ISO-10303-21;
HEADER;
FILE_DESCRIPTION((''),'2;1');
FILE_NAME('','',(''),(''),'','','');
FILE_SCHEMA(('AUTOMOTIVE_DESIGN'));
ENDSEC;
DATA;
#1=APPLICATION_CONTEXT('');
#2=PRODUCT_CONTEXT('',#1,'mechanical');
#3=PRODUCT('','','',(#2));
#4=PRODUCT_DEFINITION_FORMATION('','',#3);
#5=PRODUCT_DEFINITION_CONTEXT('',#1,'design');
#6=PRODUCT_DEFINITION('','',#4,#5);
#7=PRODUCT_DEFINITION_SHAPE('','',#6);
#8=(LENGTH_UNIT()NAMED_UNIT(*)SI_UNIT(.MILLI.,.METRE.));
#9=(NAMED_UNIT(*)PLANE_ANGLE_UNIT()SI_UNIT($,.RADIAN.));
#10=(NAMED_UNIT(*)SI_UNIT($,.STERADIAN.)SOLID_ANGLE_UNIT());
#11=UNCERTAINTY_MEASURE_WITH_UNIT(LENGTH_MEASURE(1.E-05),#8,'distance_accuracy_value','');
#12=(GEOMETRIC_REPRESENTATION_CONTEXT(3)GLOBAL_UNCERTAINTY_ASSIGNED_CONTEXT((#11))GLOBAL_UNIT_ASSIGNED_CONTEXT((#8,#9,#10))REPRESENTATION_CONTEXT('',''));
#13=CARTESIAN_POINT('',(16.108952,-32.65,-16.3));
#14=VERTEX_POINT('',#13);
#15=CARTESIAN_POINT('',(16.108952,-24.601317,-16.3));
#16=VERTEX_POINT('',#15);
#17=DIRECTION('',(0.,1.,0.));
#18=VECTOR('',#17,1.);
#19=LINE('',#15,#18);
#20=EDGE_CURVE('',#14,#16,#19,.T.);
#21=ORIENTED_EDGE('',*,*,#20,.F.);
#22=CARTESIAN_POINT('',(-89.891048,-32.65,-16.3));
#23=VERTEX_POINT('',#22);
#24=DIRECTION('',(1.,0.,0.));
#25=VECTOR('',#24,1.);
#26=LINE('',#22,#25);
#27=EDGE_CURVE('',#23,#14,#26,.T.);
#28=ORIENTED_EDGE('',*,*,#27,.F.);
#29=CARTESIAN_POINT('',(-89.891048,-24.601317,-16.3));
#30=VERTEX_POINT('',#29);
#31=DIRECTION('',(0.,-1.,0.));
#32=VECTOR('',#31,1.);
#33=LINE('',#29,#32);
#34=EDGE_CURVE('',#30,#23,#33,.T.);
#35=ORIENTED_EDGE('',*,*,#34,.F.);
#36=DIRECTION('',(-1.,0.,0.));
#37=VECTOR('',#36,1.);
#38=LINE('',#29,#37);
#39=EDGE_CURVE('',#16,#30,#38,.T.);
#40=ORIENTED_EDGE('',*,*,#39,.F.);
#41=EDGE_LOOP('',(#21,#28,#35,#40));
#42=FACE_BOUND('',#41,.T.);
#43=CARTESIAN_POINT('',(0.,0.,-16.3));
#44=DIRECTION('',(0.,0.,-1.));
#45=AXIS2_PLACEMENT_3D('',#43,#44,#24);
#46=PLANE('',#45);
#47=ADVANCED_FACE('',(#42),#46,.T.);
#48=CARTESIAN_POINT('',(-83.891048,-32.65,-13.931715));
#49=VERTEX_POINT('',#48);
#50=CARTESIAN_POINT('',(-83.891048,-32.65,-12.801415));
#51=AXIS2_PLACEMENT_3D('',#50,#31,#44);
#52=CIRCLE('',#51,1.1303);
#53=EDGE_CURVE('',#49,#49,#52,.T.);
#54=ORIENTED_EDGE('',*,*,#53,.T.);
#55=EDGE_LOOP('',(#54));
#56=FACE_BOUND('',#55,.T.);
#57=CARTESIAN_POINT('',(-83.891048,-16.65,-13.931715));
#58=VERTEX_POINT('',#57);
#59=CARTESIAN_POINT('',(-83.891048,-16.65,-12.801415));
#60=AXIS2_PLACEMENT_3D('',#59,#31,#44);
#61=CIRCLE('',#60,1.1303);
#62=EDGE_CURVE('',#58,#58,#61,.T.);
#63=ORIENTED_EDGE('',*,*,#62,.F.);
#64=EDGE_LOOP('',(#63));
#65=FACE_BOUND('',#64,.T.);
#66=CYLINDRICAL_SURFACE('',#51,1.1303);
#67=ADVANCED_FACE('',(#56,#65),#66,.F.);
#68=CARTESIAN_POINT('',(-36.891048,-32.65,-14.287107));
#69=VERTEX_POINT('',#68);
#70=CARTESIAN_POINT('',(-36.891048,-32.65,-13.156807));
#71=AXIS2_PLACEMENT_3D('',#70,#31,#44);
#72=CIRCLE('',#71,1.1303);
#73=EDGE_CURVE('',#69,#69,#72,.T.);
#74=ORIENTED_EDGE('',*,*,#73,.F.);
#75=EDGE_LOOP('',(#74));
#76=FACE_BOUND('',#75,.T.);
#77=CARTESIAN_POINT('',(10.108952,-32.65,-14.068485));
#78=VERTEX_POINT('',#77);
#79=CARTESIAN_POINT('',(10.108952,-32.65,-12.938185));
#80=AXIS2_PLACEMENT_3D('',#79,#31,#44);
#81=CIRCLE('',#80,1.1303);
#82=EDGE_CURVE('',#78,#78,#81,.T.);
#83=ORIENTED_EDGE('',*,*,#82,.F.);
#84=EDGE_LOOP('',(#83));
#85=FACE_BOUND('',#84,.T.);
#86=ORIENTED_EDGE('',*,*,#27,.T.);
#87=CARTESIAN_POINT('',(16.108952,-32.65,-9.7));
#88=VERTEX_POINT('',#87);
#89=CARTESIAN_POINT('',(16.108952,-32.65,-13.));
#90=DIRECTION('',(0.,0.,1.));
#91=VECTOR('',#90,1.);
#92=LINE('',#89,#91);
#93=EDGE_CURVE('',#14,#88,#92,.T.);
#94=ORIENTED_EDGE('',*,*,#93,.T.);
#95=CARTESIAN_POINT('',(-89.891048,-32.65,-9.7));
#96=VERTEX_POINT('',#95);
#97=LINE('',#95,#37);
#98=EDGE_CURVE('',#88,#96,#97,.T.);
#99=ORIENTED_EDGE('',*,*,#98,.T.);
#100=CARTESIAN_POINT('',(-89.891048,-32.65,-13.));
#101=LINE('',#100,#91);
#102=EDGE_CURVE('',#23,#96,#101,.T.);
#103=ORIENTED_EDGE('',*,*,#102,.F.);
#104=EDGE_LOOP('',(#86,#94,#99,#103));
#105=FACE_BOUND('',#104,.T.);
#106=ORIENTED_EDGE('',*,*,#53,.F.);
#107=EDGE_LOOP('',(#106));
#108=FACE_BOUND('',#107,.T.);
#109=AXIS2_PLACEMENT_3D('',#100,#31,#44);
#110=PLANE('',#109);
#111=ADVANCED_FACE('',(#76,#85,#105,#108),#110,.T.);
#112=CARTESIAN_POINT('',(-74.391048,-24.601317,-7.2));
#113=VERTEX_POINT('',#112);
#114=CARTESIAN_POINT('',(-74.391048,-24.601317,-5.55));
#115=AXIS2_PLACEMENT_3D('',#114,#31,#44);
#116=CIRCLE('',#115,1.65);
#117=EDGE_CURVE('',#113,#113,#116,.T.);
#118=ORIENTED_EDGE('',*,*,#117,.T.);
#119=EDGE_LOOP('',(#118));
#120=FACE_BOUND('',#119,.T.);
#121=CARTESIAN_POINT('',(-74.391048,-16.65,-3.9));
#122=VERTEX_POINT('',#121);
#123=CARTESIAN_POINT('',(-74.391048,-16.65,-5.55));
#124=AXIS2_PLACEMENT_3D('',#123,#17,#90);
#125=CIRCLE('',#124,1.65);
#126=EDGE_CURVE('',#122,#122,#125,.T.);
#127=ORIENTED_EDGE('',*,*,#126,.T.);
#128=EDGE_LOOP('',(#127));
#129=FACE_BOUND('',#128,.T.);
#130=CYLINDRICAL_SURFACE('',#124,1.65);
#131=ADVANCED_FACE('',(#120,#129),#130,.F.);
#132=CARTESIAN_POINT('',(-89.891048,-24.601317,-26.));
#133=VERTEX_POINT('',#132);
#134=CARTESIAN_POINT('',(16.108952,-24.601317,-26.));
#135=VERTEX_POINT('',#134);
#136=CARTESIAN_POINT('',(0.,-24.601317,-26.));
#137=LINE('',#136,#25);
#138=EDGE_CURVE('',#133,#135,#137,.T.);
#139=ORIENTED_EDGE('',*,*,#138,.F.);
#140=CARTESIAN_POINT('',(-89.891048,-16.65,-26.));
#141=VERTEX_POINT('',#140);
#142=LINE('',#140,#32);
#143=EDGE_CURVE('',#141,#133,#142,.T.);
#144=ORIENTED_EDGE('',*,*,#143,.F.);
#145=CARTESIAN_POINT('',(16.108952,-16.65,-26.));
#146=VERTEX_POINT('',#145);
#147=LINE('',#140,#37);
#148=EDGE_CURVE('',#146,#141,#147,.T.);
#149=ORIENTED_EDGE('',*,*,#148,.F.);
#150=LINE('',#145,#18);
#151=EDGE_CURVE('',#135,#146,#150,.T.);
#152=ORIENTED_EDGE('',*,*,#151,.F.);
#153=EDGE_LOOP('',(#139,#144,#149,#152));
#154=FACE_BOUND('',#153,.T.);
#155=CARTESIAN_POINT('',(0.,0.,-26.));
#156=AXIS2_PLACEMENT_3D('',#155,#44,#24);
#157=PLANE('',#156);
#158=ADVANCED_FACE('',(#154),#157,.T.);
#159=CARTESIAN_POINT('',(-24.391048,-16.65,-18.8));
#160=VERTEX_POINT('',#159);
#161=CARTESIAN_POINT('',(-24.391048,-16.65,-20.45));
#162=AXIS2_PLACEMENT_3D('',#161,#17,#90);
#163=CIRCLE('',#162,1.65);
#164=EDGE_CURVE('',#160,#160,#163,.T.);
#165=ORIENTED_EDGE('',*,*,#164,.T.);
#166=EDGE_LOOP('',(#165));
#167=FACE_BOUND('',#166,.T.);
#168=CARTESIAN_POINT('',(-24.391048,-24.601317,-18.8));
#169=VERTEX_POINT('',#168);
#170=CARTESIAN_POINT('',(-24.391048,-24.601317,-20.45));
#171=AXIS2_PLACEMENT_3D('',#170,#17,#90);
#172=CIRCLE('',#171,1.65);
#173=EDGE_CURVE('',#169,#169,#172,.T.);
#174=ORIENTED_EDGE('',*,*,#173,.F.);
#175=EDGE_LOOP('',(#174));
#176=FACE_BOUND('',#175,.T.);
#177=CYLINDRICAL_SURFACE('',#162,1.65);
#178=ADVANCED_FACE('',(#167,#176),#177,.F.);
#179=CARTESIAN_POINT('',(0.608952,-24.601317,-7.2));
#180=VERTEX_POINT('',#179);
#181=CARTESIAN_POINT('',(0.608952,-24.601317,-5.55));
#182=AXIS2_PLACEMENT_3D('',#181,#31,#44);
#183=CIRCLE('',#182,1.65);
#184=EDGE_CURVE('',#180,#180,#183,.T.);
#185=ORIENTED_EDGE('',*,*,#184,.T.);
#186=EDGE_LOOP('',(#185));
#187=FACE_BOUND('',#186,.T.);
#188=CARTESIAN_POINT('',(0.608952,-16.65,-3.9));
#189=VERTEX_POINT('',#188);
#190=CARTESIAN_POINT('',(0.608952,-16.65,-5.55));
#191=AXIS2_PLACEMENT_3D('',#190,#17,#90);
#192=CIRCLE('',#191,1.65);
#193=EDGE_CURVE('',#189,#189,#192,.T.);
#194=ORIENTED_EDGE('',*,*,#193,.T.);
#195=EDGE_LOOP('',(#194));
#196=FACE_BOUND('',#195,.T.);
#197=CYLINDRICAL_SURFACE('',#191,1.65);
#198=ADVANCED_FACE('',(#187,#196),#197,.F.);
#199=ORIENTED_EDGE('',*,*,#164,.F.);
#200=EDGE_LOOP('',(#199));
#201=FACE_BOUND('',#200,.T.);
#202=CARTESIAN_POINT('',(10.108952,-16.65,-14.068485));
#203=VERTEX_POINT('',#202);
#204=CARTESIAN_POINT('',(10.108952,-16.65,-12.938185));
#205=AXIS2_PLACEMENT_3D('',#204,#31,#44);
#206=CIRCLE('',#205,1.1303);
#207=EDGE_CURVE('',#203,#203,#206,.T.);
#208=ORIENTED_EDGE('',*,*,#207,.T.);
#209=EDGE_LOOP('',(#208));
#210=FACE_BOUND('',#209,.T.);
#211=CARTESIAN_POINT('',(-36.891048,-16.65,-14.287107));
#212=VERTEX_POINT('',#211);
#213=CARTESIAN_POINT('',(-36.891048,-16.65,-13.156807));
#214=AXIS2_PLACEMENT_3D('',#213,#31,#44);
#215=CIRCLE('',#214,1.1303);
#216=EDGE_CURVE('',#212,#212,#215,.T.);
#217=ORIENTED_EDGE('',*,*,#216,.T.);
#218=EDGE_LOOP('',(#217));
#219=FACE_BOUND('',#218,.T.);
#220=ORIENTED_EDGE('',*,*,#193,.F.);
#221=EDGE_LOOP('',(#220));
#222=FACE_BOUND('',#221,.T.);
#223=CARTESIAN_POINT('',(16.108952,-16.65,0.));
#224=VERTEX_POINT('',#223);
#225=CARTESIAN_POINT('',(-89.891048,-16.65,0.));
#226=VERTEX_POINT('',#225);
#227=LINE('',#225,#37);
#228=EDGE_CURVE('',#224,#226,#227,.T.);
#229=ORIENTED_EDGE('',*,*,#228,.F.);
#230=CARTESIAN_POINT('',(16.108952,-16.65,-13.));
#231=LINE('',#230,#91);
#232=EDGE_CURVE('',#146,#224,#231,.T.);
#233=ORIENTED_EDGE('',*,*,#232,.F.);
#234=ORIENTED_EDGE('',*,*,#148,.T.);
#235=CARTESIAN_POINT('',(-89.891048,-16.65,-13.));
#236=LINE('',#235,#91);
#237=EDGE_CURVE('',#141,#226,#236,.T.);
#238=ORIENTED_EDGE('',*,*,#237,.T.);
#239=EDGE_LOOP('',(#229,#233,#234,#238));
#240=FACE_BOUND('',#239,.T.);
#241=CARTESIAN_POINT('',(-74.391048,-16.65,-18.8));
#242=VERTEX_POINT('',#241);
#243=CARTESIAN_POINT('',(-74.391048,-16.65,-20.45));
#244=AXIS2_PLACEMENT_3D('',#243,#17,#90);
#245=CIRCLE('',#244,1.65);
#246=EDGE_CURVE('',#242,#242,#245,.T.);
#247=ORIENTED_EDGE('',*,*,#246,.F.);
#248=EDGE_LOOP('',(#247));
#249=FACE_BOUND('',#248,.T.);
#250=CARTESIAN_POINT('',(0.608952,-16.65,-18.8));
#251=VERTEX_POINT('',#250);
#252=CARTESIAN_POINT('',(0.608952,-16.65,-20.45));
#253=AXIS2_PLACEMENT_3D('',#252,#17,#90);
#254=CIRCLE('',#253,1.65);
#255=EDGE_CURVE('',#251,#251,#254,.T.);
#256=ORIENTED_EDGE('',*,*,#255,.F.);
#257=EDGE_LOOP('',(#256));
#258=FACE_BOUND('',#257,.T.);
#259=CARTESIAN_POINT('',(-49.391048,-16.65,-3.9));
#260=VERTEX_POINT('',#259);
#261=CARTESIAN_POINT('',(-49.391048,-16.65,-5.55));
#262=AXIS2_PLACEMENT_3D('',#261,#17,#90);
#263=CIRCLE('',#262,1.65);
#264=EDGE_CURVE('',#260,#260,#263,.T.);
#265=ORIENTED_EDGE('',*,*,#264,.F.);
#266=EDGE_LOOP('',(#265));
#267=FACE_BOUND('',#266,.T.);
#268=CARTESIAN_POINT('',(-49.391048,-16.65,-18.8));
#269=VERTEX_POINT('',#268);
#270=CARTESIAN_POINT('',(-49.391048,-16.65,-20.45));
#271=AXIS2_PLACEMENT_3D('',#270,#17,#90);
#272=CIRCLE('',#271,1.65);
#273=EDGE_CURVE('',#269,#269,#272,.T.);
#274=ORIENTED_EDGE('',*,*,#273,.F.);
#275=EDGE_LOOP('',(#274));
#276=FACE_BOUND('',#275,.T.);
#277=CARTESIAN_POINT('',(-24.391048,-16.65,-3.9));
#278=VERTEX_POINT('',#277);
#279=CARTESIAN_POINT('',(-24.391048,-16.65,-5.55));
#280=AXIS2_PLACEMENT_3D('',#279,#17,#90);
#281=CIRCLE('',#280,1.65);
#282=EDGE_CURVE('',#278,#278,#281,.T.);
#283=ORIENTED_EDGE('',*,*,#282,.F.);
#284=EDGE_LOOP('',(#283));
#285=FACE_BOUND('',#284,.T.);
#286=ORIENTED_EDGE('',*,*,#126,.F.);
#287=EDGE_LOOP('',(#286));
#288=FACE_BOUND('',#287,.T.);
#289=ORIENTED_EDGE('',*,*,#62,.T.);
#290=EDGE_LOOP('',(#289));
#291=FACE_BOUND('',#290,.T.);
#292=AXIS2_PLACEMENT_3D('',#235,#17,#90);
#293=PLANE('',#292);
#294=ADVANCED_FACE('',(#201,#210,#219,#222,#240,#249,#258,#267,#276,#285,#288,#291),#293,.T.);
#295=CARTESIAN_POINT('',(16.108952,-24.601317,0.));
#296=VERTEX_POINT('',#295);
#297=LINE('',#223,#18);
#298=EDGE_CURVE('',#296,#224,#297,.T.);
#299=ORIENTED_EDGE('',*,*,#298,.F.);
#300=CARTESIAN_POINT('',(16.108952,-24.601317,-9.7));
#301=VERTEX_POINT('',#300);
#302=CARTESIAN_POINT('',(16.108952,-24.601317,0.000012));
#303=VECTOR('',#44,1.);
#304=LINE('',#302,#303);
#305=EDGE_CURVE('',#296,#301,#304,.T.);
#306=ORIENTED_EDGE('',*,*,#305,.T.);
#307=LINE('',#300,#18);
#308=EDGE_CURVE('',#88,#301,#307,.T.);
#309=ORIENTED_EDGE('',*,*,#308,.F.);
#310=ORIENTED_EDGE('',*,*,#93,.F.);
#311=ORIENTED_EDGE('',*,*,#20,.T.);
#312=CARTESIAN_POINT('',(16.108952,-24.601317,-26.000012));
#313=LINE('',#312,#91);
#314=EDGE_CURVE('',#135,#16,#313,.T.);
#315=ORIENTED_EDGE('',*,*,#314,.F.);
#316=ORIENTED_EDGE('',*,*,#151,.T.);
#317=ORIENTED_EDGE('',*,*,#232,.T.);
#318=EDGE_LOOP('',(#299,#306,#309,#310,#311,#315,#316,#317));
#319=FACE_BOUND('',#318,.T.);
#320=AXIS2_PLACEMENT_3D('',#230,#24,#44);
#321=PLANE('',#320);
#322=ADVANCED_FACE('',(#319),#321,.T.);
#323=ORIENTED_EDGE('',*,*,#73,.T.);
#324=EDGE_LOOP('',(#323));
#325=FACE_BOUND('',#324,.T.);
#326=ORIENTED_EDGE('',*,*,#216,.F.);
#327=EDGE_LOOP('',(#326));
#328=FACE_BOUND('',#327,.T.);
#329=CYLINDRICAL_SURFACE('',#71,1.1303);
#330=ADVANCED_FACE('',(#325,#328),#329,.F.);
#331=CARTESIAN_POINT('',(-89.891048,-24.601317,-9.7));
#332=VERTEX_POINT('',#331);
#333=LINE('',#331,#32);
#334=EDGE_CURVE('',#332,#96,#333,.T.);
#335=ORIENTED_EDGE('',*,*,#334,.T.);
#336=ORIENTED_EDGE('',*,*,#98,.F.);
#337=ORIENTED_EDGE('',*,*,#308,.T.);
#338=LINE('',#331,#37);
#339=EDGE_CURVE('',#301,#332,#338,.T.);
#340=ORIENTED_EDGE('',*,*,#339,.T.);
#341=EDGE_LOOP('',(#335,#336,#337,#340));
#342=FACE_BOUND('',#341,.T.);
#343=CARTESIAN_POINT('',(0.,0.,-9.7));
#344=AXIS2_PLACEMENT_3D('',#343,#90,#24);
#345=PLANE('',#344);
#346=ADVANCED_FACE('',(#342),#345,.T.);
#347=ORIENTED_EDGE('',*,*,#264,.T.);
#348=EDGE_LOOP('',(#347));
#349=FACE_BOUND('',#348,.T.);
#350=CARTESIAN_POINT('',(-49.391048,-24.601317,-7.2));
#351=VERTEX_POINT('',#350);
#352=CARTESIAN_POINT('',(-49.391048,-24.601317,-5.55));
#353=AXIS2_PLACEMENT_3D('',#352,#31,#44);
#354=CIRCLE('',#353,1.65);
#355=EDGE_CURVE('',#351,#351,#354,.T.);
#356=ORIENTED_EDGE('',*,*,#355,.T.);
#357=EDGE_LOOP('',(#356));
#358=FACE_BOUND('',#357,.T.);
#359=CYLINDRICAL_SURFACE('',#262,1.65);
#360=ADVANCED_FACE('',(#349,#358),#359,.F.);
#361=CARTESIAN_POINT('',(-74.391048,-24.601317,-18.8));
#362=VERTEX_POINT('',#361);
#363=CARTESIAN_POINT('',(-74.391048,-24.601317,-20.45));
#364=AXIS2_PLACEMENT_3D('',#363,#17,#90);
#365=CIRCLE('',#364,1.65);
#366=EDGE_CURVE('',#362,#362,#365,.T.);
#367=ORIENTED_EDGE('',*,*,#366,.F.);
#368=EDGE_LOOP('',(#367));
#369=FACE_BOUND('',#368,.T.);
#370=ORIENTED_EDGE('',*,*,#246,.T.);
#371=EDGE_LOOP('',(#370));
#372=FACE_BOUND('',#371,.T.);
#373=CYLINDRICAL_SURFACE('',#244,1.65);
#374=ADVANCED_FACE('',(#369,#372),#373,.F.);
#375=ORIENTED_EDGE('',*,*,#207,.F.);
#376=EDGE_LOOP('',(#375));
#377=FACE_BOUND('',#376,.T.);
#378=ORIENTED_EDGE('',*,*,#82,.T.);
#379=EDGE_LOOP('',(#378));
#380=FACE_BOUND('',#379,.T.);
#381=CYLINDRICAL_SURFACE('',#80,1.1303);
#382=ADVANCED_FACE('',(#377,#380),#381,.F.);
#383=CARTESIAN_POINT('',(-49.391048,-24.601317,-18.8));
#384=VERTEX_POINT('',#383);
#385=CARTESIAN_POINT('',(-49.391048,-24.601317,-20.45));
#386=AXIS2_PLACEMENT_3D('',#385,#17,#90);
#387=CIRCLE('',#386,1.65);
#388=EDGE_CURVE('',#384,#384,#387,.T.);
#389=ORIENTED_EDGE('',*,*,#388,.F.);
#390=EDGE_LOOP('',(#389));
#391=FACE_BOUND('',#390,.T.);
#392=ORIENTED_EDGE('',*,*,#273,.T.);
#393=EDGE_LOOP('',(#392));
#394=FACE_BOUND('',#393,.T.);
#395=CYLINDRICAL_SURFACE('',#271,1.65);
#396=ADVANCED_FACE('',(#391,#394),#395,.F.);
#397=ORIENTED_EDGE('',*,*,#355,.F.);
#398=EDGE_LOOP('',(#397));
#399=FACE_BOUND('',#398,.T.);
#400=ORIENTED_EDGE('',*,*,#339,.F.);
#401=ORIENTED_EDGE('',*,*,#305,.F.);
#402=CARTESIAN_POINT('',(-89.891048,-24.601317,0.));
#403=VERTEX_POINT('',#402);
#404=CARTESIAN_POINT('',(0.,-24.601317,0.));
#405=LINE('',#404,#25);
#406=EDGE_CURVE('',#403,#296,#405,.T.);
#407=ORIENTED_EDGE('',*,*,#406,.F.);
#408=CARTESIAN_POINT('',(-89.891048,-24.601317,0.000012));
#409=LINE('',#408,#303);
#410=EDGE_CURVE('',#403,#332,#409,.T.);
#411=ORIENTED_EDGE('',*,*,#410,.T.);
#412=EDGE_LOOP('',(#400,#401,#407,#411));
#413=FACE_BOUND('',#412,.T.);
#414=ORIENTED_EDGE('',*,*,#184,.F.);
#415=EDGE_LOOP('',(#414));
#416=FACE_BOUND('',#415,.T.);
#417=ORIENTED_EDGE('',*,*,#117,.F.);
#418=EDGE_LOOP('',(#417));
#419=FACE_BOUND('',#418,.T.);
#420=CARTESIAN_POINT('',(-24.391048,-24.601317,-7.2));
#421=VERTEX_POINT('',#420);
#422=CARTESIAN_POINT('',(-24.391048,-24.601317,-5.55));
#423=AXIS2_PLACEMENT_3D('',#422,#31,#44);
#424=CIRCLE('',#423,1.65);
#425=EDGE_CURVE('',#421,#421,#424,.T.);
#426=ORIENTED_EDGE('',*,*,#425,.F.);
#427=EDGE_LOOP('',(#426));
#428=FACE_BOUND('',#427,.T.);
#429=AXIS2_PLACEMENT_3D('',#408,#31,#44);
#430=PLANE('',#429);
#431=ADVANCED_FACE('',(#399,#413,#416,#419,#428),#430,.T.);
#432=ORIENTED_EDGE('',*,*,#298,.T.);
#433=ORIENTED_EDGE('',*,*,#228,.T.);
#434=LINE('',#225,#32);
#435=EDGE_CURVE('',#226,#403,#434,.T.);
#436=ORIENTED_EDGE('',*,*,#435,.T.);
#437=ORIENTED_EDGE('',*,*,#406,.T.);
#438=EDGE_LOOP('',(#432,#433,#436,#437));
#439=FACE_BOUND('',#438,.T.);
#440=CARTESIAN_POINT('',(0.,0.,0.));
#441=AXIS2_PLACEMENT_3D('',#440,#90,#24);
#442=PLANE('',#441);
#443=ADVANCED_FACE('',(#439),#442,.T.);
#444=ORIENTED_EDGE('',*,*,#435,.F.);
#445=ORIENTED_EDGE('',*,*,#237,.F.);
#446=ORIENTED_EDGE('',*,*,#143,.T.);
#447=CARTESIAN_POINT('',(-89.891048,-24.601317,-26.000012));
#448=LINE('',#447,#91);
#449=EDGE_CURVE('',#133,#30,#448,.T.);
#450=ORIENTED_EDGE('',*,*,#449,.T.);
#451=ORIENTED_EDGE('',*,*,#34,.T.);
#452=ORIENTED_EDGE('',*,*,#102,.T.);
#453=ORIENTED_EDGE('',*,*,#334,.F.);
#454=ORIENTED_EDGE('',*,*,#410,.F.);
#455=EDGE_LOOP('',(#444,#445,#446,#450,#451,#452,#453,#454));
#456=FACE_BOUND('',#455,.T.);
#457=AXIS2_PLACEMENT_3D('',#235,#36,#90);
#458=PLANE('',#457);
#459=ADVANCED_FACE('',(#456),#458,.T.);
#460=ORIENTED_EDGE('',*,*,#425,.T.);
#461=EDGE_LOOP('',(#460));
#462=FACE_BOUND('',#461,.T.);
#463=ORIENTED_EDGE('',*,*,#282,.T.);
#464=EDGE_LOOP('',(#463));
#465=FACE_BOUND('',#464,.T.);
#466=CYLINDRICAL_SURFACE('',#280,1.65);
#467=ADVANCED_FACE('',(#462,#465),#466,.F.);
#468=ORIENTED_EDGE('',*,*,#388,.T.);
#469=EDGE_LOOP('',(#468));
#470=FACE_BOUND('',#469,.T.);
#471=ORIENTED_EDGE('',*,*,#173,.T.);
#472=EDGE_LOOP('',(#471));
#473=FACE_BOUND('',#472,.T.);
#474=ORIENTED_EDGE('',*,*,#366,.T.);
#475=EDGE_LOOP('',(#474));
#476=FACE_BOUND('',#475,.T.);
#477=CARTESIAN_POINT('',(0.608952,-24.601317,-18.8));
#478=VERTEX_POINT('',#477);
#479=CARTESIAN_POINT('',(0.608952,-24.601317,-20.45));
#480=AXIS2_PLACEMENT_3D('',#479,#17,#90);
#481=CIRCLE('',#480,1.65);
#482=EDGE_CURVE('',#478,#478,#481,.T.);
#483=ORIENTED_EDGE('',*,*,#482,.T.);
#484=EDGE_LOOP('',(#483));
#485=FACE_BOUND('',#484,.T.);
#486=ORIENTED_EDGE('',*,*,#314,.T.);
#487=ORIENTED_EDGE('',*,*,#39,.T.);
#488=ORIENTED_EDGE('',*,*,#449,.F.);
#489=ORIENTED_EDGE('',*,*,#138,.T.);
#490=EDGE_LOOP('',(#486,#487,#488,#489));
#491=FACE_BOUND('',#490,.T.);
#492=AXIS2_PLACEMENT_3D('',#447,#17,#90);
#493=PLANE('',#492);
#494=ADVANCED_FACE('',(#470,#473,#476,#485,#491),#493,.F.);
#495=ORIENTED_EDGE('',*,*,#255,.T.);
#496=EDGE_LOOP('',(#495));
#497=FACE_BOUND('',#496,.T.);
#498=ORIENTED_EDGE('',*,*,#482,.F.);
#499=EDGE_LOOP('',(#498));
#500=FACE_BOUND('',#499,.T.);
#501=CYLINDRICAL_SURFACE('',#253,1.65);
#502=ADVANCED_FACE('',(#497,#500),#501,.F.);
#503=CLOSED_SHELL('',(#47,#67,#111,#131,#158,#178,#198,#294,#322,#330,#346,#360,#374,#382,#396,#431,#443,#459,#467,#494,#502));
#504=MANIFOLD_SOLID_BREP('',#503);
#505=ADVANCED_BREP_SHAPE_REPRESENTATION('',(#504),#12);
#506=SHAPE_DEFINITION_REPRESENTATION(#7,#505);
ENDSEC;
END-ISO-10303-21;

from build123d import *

# Parameters (mm, degrees)
SKETCH4_W                       = 106
SKETCH4_H                       = 16
BOSS_EXTRUDE2_DEPTH             = 13
CUT_EXTRUDE3_START              = -9.7
SKETCH25_W                      = 106
SKETCH25_H                      = 8.1
CUT_EXTRUDE3_DEPTH              = 107.216438698
M4X0_7_TAPPED_HOLE1_D           = 3.3
MIRROR1_START                   = -24.601316976
MIRROR1_OUTLINE_W               = 106
MIRROR1_OUTLINE_H               = 13
MIRROR1_OUTLINE_R               = 1.65
MIRROR1_DEPTH                   = 7.951316976
MIRROR1_START_2                 = -32.65
MIRROR1_2_OUTLINE_W             = 106
MIRROR1_2_OUTLINE_H             = 3.3
MIRROR1_2_DEPTH                 = 8.048683024
F_4_40_TAPPED_HOLE1_D           = 2.2606
F_4_40_TAPPED_HOLE1_ON_FACE_2_D = 2.2606


# Read off the part's stored shape, not the designer's step: Mirror1
with BuildPart() as part:
    # Sketch4 → Boss-Extrude2 (new body)
    with BuildSketch(Plane.XY):
        with Locations((-36.891047602, -24.65)):
            Rectangle(SKETCH4_W, SKETCH4_H)
    extrude(amount=-BOSS_EXTRUDE2_DEPTH)

    # Sketch25 → Cut-Extrude3 (cut)
    with BuildSketch(Plane.XY.offset(CUT_EXTRUDE3_START)):
        with Locations((-36.891047602, -28.651316976)):
            Rectangle(SKETCH25_W, SKETCH25_H)
    extrude(amount=CUT_EXTRUDE3_DEPTH, mode=Mode.SUBTRACT)

    # M4x0.7 Tapped Hole1 (through all)
    with Locations(Plane(origin=(-74.391047602, -16.65, -5.55), x_dir=(0, 0, 1), z_dir=(0, 1, 0))):
        with Locations((0, 0), (0, 25), (0, 75), (0, 50)):
            Hole(M4X0_7_TAPPED_HOLE1_D / 2)

    # Mirror1 outline → Mirror1 (add)
    with BuildSketch(Plane(origin=(0, 0, 0), x_dir=(1, 0, 0), z_dir=(0, 1, 0)).offset(MIRROR1_START)):
        with Locations((-36.891047602, 19.5)):
            Rectangle(MIRROR1_OUTLINE_W, MIRROR1_OUTLINE_H)
        with Locations((-74.391047602, 20.45)):
            Circle(MIRROR1_OUTLINE_R, mode=Mode.SUBTRACT)
        with Locations((-49.391047602, 20.45)):
            Circle(MIRROR1_OUTLINE_R, mode=Mode.SUBTRACT)
        with Locations((-24.391047602, 20.45)):
            Circle(MIRROR1_OUTLINE_R, mode=Mode.SUBTRACT)
        with Locations((0.608952398, 20.45)):
            Circle(MIRROR1_OUTLINE_R, mode=Mode.SUBTRACT)
    extrude(amount=MIRROR1_DEPTH)

    # Mirror1 2 outline → Mirror1 2 (add)
    with BuildSketch(Plane(origin=(0, 0, 0), x_dir=(1, 0, 0), z_dir=(0, 1, 0)).offset(MIRROR1_START_2)):
        with Locations((-36.891047602, 14.65)):
            Rectangle(MIRROR1_2_OUTLINE_W, MIRROR1_2_OUTLINE_H)
    extrude(amount=MIRROR1_2_DEPTH)

    # #4-40 Tapped Hole1 (through all)
    with Locations(Plane(origin=(-83.891047602, -32.65, -12.801414568), x_dir=(0, 0, -1), z_dir=(0, -1, 0))):
        with Locations((0, 0), (0.13677014, 94), (0.355392609, 47)):
            Hole(F_4_40_TAPPED_HOLE1_D / 2)

    # #4-40 Tapped Hole1 on face 2 (through all)
    with Locations(Plane(origin=(-13.707536503, 0, 46.33240541), x_dir=(0, 0, -1), z_dir=(0, -1, 0))):
        with Locations((0, 0)):
            Hole(F_4_40_TAPPED_HOLE1_ON_FACE_2_D / 2)


solid = part.part
